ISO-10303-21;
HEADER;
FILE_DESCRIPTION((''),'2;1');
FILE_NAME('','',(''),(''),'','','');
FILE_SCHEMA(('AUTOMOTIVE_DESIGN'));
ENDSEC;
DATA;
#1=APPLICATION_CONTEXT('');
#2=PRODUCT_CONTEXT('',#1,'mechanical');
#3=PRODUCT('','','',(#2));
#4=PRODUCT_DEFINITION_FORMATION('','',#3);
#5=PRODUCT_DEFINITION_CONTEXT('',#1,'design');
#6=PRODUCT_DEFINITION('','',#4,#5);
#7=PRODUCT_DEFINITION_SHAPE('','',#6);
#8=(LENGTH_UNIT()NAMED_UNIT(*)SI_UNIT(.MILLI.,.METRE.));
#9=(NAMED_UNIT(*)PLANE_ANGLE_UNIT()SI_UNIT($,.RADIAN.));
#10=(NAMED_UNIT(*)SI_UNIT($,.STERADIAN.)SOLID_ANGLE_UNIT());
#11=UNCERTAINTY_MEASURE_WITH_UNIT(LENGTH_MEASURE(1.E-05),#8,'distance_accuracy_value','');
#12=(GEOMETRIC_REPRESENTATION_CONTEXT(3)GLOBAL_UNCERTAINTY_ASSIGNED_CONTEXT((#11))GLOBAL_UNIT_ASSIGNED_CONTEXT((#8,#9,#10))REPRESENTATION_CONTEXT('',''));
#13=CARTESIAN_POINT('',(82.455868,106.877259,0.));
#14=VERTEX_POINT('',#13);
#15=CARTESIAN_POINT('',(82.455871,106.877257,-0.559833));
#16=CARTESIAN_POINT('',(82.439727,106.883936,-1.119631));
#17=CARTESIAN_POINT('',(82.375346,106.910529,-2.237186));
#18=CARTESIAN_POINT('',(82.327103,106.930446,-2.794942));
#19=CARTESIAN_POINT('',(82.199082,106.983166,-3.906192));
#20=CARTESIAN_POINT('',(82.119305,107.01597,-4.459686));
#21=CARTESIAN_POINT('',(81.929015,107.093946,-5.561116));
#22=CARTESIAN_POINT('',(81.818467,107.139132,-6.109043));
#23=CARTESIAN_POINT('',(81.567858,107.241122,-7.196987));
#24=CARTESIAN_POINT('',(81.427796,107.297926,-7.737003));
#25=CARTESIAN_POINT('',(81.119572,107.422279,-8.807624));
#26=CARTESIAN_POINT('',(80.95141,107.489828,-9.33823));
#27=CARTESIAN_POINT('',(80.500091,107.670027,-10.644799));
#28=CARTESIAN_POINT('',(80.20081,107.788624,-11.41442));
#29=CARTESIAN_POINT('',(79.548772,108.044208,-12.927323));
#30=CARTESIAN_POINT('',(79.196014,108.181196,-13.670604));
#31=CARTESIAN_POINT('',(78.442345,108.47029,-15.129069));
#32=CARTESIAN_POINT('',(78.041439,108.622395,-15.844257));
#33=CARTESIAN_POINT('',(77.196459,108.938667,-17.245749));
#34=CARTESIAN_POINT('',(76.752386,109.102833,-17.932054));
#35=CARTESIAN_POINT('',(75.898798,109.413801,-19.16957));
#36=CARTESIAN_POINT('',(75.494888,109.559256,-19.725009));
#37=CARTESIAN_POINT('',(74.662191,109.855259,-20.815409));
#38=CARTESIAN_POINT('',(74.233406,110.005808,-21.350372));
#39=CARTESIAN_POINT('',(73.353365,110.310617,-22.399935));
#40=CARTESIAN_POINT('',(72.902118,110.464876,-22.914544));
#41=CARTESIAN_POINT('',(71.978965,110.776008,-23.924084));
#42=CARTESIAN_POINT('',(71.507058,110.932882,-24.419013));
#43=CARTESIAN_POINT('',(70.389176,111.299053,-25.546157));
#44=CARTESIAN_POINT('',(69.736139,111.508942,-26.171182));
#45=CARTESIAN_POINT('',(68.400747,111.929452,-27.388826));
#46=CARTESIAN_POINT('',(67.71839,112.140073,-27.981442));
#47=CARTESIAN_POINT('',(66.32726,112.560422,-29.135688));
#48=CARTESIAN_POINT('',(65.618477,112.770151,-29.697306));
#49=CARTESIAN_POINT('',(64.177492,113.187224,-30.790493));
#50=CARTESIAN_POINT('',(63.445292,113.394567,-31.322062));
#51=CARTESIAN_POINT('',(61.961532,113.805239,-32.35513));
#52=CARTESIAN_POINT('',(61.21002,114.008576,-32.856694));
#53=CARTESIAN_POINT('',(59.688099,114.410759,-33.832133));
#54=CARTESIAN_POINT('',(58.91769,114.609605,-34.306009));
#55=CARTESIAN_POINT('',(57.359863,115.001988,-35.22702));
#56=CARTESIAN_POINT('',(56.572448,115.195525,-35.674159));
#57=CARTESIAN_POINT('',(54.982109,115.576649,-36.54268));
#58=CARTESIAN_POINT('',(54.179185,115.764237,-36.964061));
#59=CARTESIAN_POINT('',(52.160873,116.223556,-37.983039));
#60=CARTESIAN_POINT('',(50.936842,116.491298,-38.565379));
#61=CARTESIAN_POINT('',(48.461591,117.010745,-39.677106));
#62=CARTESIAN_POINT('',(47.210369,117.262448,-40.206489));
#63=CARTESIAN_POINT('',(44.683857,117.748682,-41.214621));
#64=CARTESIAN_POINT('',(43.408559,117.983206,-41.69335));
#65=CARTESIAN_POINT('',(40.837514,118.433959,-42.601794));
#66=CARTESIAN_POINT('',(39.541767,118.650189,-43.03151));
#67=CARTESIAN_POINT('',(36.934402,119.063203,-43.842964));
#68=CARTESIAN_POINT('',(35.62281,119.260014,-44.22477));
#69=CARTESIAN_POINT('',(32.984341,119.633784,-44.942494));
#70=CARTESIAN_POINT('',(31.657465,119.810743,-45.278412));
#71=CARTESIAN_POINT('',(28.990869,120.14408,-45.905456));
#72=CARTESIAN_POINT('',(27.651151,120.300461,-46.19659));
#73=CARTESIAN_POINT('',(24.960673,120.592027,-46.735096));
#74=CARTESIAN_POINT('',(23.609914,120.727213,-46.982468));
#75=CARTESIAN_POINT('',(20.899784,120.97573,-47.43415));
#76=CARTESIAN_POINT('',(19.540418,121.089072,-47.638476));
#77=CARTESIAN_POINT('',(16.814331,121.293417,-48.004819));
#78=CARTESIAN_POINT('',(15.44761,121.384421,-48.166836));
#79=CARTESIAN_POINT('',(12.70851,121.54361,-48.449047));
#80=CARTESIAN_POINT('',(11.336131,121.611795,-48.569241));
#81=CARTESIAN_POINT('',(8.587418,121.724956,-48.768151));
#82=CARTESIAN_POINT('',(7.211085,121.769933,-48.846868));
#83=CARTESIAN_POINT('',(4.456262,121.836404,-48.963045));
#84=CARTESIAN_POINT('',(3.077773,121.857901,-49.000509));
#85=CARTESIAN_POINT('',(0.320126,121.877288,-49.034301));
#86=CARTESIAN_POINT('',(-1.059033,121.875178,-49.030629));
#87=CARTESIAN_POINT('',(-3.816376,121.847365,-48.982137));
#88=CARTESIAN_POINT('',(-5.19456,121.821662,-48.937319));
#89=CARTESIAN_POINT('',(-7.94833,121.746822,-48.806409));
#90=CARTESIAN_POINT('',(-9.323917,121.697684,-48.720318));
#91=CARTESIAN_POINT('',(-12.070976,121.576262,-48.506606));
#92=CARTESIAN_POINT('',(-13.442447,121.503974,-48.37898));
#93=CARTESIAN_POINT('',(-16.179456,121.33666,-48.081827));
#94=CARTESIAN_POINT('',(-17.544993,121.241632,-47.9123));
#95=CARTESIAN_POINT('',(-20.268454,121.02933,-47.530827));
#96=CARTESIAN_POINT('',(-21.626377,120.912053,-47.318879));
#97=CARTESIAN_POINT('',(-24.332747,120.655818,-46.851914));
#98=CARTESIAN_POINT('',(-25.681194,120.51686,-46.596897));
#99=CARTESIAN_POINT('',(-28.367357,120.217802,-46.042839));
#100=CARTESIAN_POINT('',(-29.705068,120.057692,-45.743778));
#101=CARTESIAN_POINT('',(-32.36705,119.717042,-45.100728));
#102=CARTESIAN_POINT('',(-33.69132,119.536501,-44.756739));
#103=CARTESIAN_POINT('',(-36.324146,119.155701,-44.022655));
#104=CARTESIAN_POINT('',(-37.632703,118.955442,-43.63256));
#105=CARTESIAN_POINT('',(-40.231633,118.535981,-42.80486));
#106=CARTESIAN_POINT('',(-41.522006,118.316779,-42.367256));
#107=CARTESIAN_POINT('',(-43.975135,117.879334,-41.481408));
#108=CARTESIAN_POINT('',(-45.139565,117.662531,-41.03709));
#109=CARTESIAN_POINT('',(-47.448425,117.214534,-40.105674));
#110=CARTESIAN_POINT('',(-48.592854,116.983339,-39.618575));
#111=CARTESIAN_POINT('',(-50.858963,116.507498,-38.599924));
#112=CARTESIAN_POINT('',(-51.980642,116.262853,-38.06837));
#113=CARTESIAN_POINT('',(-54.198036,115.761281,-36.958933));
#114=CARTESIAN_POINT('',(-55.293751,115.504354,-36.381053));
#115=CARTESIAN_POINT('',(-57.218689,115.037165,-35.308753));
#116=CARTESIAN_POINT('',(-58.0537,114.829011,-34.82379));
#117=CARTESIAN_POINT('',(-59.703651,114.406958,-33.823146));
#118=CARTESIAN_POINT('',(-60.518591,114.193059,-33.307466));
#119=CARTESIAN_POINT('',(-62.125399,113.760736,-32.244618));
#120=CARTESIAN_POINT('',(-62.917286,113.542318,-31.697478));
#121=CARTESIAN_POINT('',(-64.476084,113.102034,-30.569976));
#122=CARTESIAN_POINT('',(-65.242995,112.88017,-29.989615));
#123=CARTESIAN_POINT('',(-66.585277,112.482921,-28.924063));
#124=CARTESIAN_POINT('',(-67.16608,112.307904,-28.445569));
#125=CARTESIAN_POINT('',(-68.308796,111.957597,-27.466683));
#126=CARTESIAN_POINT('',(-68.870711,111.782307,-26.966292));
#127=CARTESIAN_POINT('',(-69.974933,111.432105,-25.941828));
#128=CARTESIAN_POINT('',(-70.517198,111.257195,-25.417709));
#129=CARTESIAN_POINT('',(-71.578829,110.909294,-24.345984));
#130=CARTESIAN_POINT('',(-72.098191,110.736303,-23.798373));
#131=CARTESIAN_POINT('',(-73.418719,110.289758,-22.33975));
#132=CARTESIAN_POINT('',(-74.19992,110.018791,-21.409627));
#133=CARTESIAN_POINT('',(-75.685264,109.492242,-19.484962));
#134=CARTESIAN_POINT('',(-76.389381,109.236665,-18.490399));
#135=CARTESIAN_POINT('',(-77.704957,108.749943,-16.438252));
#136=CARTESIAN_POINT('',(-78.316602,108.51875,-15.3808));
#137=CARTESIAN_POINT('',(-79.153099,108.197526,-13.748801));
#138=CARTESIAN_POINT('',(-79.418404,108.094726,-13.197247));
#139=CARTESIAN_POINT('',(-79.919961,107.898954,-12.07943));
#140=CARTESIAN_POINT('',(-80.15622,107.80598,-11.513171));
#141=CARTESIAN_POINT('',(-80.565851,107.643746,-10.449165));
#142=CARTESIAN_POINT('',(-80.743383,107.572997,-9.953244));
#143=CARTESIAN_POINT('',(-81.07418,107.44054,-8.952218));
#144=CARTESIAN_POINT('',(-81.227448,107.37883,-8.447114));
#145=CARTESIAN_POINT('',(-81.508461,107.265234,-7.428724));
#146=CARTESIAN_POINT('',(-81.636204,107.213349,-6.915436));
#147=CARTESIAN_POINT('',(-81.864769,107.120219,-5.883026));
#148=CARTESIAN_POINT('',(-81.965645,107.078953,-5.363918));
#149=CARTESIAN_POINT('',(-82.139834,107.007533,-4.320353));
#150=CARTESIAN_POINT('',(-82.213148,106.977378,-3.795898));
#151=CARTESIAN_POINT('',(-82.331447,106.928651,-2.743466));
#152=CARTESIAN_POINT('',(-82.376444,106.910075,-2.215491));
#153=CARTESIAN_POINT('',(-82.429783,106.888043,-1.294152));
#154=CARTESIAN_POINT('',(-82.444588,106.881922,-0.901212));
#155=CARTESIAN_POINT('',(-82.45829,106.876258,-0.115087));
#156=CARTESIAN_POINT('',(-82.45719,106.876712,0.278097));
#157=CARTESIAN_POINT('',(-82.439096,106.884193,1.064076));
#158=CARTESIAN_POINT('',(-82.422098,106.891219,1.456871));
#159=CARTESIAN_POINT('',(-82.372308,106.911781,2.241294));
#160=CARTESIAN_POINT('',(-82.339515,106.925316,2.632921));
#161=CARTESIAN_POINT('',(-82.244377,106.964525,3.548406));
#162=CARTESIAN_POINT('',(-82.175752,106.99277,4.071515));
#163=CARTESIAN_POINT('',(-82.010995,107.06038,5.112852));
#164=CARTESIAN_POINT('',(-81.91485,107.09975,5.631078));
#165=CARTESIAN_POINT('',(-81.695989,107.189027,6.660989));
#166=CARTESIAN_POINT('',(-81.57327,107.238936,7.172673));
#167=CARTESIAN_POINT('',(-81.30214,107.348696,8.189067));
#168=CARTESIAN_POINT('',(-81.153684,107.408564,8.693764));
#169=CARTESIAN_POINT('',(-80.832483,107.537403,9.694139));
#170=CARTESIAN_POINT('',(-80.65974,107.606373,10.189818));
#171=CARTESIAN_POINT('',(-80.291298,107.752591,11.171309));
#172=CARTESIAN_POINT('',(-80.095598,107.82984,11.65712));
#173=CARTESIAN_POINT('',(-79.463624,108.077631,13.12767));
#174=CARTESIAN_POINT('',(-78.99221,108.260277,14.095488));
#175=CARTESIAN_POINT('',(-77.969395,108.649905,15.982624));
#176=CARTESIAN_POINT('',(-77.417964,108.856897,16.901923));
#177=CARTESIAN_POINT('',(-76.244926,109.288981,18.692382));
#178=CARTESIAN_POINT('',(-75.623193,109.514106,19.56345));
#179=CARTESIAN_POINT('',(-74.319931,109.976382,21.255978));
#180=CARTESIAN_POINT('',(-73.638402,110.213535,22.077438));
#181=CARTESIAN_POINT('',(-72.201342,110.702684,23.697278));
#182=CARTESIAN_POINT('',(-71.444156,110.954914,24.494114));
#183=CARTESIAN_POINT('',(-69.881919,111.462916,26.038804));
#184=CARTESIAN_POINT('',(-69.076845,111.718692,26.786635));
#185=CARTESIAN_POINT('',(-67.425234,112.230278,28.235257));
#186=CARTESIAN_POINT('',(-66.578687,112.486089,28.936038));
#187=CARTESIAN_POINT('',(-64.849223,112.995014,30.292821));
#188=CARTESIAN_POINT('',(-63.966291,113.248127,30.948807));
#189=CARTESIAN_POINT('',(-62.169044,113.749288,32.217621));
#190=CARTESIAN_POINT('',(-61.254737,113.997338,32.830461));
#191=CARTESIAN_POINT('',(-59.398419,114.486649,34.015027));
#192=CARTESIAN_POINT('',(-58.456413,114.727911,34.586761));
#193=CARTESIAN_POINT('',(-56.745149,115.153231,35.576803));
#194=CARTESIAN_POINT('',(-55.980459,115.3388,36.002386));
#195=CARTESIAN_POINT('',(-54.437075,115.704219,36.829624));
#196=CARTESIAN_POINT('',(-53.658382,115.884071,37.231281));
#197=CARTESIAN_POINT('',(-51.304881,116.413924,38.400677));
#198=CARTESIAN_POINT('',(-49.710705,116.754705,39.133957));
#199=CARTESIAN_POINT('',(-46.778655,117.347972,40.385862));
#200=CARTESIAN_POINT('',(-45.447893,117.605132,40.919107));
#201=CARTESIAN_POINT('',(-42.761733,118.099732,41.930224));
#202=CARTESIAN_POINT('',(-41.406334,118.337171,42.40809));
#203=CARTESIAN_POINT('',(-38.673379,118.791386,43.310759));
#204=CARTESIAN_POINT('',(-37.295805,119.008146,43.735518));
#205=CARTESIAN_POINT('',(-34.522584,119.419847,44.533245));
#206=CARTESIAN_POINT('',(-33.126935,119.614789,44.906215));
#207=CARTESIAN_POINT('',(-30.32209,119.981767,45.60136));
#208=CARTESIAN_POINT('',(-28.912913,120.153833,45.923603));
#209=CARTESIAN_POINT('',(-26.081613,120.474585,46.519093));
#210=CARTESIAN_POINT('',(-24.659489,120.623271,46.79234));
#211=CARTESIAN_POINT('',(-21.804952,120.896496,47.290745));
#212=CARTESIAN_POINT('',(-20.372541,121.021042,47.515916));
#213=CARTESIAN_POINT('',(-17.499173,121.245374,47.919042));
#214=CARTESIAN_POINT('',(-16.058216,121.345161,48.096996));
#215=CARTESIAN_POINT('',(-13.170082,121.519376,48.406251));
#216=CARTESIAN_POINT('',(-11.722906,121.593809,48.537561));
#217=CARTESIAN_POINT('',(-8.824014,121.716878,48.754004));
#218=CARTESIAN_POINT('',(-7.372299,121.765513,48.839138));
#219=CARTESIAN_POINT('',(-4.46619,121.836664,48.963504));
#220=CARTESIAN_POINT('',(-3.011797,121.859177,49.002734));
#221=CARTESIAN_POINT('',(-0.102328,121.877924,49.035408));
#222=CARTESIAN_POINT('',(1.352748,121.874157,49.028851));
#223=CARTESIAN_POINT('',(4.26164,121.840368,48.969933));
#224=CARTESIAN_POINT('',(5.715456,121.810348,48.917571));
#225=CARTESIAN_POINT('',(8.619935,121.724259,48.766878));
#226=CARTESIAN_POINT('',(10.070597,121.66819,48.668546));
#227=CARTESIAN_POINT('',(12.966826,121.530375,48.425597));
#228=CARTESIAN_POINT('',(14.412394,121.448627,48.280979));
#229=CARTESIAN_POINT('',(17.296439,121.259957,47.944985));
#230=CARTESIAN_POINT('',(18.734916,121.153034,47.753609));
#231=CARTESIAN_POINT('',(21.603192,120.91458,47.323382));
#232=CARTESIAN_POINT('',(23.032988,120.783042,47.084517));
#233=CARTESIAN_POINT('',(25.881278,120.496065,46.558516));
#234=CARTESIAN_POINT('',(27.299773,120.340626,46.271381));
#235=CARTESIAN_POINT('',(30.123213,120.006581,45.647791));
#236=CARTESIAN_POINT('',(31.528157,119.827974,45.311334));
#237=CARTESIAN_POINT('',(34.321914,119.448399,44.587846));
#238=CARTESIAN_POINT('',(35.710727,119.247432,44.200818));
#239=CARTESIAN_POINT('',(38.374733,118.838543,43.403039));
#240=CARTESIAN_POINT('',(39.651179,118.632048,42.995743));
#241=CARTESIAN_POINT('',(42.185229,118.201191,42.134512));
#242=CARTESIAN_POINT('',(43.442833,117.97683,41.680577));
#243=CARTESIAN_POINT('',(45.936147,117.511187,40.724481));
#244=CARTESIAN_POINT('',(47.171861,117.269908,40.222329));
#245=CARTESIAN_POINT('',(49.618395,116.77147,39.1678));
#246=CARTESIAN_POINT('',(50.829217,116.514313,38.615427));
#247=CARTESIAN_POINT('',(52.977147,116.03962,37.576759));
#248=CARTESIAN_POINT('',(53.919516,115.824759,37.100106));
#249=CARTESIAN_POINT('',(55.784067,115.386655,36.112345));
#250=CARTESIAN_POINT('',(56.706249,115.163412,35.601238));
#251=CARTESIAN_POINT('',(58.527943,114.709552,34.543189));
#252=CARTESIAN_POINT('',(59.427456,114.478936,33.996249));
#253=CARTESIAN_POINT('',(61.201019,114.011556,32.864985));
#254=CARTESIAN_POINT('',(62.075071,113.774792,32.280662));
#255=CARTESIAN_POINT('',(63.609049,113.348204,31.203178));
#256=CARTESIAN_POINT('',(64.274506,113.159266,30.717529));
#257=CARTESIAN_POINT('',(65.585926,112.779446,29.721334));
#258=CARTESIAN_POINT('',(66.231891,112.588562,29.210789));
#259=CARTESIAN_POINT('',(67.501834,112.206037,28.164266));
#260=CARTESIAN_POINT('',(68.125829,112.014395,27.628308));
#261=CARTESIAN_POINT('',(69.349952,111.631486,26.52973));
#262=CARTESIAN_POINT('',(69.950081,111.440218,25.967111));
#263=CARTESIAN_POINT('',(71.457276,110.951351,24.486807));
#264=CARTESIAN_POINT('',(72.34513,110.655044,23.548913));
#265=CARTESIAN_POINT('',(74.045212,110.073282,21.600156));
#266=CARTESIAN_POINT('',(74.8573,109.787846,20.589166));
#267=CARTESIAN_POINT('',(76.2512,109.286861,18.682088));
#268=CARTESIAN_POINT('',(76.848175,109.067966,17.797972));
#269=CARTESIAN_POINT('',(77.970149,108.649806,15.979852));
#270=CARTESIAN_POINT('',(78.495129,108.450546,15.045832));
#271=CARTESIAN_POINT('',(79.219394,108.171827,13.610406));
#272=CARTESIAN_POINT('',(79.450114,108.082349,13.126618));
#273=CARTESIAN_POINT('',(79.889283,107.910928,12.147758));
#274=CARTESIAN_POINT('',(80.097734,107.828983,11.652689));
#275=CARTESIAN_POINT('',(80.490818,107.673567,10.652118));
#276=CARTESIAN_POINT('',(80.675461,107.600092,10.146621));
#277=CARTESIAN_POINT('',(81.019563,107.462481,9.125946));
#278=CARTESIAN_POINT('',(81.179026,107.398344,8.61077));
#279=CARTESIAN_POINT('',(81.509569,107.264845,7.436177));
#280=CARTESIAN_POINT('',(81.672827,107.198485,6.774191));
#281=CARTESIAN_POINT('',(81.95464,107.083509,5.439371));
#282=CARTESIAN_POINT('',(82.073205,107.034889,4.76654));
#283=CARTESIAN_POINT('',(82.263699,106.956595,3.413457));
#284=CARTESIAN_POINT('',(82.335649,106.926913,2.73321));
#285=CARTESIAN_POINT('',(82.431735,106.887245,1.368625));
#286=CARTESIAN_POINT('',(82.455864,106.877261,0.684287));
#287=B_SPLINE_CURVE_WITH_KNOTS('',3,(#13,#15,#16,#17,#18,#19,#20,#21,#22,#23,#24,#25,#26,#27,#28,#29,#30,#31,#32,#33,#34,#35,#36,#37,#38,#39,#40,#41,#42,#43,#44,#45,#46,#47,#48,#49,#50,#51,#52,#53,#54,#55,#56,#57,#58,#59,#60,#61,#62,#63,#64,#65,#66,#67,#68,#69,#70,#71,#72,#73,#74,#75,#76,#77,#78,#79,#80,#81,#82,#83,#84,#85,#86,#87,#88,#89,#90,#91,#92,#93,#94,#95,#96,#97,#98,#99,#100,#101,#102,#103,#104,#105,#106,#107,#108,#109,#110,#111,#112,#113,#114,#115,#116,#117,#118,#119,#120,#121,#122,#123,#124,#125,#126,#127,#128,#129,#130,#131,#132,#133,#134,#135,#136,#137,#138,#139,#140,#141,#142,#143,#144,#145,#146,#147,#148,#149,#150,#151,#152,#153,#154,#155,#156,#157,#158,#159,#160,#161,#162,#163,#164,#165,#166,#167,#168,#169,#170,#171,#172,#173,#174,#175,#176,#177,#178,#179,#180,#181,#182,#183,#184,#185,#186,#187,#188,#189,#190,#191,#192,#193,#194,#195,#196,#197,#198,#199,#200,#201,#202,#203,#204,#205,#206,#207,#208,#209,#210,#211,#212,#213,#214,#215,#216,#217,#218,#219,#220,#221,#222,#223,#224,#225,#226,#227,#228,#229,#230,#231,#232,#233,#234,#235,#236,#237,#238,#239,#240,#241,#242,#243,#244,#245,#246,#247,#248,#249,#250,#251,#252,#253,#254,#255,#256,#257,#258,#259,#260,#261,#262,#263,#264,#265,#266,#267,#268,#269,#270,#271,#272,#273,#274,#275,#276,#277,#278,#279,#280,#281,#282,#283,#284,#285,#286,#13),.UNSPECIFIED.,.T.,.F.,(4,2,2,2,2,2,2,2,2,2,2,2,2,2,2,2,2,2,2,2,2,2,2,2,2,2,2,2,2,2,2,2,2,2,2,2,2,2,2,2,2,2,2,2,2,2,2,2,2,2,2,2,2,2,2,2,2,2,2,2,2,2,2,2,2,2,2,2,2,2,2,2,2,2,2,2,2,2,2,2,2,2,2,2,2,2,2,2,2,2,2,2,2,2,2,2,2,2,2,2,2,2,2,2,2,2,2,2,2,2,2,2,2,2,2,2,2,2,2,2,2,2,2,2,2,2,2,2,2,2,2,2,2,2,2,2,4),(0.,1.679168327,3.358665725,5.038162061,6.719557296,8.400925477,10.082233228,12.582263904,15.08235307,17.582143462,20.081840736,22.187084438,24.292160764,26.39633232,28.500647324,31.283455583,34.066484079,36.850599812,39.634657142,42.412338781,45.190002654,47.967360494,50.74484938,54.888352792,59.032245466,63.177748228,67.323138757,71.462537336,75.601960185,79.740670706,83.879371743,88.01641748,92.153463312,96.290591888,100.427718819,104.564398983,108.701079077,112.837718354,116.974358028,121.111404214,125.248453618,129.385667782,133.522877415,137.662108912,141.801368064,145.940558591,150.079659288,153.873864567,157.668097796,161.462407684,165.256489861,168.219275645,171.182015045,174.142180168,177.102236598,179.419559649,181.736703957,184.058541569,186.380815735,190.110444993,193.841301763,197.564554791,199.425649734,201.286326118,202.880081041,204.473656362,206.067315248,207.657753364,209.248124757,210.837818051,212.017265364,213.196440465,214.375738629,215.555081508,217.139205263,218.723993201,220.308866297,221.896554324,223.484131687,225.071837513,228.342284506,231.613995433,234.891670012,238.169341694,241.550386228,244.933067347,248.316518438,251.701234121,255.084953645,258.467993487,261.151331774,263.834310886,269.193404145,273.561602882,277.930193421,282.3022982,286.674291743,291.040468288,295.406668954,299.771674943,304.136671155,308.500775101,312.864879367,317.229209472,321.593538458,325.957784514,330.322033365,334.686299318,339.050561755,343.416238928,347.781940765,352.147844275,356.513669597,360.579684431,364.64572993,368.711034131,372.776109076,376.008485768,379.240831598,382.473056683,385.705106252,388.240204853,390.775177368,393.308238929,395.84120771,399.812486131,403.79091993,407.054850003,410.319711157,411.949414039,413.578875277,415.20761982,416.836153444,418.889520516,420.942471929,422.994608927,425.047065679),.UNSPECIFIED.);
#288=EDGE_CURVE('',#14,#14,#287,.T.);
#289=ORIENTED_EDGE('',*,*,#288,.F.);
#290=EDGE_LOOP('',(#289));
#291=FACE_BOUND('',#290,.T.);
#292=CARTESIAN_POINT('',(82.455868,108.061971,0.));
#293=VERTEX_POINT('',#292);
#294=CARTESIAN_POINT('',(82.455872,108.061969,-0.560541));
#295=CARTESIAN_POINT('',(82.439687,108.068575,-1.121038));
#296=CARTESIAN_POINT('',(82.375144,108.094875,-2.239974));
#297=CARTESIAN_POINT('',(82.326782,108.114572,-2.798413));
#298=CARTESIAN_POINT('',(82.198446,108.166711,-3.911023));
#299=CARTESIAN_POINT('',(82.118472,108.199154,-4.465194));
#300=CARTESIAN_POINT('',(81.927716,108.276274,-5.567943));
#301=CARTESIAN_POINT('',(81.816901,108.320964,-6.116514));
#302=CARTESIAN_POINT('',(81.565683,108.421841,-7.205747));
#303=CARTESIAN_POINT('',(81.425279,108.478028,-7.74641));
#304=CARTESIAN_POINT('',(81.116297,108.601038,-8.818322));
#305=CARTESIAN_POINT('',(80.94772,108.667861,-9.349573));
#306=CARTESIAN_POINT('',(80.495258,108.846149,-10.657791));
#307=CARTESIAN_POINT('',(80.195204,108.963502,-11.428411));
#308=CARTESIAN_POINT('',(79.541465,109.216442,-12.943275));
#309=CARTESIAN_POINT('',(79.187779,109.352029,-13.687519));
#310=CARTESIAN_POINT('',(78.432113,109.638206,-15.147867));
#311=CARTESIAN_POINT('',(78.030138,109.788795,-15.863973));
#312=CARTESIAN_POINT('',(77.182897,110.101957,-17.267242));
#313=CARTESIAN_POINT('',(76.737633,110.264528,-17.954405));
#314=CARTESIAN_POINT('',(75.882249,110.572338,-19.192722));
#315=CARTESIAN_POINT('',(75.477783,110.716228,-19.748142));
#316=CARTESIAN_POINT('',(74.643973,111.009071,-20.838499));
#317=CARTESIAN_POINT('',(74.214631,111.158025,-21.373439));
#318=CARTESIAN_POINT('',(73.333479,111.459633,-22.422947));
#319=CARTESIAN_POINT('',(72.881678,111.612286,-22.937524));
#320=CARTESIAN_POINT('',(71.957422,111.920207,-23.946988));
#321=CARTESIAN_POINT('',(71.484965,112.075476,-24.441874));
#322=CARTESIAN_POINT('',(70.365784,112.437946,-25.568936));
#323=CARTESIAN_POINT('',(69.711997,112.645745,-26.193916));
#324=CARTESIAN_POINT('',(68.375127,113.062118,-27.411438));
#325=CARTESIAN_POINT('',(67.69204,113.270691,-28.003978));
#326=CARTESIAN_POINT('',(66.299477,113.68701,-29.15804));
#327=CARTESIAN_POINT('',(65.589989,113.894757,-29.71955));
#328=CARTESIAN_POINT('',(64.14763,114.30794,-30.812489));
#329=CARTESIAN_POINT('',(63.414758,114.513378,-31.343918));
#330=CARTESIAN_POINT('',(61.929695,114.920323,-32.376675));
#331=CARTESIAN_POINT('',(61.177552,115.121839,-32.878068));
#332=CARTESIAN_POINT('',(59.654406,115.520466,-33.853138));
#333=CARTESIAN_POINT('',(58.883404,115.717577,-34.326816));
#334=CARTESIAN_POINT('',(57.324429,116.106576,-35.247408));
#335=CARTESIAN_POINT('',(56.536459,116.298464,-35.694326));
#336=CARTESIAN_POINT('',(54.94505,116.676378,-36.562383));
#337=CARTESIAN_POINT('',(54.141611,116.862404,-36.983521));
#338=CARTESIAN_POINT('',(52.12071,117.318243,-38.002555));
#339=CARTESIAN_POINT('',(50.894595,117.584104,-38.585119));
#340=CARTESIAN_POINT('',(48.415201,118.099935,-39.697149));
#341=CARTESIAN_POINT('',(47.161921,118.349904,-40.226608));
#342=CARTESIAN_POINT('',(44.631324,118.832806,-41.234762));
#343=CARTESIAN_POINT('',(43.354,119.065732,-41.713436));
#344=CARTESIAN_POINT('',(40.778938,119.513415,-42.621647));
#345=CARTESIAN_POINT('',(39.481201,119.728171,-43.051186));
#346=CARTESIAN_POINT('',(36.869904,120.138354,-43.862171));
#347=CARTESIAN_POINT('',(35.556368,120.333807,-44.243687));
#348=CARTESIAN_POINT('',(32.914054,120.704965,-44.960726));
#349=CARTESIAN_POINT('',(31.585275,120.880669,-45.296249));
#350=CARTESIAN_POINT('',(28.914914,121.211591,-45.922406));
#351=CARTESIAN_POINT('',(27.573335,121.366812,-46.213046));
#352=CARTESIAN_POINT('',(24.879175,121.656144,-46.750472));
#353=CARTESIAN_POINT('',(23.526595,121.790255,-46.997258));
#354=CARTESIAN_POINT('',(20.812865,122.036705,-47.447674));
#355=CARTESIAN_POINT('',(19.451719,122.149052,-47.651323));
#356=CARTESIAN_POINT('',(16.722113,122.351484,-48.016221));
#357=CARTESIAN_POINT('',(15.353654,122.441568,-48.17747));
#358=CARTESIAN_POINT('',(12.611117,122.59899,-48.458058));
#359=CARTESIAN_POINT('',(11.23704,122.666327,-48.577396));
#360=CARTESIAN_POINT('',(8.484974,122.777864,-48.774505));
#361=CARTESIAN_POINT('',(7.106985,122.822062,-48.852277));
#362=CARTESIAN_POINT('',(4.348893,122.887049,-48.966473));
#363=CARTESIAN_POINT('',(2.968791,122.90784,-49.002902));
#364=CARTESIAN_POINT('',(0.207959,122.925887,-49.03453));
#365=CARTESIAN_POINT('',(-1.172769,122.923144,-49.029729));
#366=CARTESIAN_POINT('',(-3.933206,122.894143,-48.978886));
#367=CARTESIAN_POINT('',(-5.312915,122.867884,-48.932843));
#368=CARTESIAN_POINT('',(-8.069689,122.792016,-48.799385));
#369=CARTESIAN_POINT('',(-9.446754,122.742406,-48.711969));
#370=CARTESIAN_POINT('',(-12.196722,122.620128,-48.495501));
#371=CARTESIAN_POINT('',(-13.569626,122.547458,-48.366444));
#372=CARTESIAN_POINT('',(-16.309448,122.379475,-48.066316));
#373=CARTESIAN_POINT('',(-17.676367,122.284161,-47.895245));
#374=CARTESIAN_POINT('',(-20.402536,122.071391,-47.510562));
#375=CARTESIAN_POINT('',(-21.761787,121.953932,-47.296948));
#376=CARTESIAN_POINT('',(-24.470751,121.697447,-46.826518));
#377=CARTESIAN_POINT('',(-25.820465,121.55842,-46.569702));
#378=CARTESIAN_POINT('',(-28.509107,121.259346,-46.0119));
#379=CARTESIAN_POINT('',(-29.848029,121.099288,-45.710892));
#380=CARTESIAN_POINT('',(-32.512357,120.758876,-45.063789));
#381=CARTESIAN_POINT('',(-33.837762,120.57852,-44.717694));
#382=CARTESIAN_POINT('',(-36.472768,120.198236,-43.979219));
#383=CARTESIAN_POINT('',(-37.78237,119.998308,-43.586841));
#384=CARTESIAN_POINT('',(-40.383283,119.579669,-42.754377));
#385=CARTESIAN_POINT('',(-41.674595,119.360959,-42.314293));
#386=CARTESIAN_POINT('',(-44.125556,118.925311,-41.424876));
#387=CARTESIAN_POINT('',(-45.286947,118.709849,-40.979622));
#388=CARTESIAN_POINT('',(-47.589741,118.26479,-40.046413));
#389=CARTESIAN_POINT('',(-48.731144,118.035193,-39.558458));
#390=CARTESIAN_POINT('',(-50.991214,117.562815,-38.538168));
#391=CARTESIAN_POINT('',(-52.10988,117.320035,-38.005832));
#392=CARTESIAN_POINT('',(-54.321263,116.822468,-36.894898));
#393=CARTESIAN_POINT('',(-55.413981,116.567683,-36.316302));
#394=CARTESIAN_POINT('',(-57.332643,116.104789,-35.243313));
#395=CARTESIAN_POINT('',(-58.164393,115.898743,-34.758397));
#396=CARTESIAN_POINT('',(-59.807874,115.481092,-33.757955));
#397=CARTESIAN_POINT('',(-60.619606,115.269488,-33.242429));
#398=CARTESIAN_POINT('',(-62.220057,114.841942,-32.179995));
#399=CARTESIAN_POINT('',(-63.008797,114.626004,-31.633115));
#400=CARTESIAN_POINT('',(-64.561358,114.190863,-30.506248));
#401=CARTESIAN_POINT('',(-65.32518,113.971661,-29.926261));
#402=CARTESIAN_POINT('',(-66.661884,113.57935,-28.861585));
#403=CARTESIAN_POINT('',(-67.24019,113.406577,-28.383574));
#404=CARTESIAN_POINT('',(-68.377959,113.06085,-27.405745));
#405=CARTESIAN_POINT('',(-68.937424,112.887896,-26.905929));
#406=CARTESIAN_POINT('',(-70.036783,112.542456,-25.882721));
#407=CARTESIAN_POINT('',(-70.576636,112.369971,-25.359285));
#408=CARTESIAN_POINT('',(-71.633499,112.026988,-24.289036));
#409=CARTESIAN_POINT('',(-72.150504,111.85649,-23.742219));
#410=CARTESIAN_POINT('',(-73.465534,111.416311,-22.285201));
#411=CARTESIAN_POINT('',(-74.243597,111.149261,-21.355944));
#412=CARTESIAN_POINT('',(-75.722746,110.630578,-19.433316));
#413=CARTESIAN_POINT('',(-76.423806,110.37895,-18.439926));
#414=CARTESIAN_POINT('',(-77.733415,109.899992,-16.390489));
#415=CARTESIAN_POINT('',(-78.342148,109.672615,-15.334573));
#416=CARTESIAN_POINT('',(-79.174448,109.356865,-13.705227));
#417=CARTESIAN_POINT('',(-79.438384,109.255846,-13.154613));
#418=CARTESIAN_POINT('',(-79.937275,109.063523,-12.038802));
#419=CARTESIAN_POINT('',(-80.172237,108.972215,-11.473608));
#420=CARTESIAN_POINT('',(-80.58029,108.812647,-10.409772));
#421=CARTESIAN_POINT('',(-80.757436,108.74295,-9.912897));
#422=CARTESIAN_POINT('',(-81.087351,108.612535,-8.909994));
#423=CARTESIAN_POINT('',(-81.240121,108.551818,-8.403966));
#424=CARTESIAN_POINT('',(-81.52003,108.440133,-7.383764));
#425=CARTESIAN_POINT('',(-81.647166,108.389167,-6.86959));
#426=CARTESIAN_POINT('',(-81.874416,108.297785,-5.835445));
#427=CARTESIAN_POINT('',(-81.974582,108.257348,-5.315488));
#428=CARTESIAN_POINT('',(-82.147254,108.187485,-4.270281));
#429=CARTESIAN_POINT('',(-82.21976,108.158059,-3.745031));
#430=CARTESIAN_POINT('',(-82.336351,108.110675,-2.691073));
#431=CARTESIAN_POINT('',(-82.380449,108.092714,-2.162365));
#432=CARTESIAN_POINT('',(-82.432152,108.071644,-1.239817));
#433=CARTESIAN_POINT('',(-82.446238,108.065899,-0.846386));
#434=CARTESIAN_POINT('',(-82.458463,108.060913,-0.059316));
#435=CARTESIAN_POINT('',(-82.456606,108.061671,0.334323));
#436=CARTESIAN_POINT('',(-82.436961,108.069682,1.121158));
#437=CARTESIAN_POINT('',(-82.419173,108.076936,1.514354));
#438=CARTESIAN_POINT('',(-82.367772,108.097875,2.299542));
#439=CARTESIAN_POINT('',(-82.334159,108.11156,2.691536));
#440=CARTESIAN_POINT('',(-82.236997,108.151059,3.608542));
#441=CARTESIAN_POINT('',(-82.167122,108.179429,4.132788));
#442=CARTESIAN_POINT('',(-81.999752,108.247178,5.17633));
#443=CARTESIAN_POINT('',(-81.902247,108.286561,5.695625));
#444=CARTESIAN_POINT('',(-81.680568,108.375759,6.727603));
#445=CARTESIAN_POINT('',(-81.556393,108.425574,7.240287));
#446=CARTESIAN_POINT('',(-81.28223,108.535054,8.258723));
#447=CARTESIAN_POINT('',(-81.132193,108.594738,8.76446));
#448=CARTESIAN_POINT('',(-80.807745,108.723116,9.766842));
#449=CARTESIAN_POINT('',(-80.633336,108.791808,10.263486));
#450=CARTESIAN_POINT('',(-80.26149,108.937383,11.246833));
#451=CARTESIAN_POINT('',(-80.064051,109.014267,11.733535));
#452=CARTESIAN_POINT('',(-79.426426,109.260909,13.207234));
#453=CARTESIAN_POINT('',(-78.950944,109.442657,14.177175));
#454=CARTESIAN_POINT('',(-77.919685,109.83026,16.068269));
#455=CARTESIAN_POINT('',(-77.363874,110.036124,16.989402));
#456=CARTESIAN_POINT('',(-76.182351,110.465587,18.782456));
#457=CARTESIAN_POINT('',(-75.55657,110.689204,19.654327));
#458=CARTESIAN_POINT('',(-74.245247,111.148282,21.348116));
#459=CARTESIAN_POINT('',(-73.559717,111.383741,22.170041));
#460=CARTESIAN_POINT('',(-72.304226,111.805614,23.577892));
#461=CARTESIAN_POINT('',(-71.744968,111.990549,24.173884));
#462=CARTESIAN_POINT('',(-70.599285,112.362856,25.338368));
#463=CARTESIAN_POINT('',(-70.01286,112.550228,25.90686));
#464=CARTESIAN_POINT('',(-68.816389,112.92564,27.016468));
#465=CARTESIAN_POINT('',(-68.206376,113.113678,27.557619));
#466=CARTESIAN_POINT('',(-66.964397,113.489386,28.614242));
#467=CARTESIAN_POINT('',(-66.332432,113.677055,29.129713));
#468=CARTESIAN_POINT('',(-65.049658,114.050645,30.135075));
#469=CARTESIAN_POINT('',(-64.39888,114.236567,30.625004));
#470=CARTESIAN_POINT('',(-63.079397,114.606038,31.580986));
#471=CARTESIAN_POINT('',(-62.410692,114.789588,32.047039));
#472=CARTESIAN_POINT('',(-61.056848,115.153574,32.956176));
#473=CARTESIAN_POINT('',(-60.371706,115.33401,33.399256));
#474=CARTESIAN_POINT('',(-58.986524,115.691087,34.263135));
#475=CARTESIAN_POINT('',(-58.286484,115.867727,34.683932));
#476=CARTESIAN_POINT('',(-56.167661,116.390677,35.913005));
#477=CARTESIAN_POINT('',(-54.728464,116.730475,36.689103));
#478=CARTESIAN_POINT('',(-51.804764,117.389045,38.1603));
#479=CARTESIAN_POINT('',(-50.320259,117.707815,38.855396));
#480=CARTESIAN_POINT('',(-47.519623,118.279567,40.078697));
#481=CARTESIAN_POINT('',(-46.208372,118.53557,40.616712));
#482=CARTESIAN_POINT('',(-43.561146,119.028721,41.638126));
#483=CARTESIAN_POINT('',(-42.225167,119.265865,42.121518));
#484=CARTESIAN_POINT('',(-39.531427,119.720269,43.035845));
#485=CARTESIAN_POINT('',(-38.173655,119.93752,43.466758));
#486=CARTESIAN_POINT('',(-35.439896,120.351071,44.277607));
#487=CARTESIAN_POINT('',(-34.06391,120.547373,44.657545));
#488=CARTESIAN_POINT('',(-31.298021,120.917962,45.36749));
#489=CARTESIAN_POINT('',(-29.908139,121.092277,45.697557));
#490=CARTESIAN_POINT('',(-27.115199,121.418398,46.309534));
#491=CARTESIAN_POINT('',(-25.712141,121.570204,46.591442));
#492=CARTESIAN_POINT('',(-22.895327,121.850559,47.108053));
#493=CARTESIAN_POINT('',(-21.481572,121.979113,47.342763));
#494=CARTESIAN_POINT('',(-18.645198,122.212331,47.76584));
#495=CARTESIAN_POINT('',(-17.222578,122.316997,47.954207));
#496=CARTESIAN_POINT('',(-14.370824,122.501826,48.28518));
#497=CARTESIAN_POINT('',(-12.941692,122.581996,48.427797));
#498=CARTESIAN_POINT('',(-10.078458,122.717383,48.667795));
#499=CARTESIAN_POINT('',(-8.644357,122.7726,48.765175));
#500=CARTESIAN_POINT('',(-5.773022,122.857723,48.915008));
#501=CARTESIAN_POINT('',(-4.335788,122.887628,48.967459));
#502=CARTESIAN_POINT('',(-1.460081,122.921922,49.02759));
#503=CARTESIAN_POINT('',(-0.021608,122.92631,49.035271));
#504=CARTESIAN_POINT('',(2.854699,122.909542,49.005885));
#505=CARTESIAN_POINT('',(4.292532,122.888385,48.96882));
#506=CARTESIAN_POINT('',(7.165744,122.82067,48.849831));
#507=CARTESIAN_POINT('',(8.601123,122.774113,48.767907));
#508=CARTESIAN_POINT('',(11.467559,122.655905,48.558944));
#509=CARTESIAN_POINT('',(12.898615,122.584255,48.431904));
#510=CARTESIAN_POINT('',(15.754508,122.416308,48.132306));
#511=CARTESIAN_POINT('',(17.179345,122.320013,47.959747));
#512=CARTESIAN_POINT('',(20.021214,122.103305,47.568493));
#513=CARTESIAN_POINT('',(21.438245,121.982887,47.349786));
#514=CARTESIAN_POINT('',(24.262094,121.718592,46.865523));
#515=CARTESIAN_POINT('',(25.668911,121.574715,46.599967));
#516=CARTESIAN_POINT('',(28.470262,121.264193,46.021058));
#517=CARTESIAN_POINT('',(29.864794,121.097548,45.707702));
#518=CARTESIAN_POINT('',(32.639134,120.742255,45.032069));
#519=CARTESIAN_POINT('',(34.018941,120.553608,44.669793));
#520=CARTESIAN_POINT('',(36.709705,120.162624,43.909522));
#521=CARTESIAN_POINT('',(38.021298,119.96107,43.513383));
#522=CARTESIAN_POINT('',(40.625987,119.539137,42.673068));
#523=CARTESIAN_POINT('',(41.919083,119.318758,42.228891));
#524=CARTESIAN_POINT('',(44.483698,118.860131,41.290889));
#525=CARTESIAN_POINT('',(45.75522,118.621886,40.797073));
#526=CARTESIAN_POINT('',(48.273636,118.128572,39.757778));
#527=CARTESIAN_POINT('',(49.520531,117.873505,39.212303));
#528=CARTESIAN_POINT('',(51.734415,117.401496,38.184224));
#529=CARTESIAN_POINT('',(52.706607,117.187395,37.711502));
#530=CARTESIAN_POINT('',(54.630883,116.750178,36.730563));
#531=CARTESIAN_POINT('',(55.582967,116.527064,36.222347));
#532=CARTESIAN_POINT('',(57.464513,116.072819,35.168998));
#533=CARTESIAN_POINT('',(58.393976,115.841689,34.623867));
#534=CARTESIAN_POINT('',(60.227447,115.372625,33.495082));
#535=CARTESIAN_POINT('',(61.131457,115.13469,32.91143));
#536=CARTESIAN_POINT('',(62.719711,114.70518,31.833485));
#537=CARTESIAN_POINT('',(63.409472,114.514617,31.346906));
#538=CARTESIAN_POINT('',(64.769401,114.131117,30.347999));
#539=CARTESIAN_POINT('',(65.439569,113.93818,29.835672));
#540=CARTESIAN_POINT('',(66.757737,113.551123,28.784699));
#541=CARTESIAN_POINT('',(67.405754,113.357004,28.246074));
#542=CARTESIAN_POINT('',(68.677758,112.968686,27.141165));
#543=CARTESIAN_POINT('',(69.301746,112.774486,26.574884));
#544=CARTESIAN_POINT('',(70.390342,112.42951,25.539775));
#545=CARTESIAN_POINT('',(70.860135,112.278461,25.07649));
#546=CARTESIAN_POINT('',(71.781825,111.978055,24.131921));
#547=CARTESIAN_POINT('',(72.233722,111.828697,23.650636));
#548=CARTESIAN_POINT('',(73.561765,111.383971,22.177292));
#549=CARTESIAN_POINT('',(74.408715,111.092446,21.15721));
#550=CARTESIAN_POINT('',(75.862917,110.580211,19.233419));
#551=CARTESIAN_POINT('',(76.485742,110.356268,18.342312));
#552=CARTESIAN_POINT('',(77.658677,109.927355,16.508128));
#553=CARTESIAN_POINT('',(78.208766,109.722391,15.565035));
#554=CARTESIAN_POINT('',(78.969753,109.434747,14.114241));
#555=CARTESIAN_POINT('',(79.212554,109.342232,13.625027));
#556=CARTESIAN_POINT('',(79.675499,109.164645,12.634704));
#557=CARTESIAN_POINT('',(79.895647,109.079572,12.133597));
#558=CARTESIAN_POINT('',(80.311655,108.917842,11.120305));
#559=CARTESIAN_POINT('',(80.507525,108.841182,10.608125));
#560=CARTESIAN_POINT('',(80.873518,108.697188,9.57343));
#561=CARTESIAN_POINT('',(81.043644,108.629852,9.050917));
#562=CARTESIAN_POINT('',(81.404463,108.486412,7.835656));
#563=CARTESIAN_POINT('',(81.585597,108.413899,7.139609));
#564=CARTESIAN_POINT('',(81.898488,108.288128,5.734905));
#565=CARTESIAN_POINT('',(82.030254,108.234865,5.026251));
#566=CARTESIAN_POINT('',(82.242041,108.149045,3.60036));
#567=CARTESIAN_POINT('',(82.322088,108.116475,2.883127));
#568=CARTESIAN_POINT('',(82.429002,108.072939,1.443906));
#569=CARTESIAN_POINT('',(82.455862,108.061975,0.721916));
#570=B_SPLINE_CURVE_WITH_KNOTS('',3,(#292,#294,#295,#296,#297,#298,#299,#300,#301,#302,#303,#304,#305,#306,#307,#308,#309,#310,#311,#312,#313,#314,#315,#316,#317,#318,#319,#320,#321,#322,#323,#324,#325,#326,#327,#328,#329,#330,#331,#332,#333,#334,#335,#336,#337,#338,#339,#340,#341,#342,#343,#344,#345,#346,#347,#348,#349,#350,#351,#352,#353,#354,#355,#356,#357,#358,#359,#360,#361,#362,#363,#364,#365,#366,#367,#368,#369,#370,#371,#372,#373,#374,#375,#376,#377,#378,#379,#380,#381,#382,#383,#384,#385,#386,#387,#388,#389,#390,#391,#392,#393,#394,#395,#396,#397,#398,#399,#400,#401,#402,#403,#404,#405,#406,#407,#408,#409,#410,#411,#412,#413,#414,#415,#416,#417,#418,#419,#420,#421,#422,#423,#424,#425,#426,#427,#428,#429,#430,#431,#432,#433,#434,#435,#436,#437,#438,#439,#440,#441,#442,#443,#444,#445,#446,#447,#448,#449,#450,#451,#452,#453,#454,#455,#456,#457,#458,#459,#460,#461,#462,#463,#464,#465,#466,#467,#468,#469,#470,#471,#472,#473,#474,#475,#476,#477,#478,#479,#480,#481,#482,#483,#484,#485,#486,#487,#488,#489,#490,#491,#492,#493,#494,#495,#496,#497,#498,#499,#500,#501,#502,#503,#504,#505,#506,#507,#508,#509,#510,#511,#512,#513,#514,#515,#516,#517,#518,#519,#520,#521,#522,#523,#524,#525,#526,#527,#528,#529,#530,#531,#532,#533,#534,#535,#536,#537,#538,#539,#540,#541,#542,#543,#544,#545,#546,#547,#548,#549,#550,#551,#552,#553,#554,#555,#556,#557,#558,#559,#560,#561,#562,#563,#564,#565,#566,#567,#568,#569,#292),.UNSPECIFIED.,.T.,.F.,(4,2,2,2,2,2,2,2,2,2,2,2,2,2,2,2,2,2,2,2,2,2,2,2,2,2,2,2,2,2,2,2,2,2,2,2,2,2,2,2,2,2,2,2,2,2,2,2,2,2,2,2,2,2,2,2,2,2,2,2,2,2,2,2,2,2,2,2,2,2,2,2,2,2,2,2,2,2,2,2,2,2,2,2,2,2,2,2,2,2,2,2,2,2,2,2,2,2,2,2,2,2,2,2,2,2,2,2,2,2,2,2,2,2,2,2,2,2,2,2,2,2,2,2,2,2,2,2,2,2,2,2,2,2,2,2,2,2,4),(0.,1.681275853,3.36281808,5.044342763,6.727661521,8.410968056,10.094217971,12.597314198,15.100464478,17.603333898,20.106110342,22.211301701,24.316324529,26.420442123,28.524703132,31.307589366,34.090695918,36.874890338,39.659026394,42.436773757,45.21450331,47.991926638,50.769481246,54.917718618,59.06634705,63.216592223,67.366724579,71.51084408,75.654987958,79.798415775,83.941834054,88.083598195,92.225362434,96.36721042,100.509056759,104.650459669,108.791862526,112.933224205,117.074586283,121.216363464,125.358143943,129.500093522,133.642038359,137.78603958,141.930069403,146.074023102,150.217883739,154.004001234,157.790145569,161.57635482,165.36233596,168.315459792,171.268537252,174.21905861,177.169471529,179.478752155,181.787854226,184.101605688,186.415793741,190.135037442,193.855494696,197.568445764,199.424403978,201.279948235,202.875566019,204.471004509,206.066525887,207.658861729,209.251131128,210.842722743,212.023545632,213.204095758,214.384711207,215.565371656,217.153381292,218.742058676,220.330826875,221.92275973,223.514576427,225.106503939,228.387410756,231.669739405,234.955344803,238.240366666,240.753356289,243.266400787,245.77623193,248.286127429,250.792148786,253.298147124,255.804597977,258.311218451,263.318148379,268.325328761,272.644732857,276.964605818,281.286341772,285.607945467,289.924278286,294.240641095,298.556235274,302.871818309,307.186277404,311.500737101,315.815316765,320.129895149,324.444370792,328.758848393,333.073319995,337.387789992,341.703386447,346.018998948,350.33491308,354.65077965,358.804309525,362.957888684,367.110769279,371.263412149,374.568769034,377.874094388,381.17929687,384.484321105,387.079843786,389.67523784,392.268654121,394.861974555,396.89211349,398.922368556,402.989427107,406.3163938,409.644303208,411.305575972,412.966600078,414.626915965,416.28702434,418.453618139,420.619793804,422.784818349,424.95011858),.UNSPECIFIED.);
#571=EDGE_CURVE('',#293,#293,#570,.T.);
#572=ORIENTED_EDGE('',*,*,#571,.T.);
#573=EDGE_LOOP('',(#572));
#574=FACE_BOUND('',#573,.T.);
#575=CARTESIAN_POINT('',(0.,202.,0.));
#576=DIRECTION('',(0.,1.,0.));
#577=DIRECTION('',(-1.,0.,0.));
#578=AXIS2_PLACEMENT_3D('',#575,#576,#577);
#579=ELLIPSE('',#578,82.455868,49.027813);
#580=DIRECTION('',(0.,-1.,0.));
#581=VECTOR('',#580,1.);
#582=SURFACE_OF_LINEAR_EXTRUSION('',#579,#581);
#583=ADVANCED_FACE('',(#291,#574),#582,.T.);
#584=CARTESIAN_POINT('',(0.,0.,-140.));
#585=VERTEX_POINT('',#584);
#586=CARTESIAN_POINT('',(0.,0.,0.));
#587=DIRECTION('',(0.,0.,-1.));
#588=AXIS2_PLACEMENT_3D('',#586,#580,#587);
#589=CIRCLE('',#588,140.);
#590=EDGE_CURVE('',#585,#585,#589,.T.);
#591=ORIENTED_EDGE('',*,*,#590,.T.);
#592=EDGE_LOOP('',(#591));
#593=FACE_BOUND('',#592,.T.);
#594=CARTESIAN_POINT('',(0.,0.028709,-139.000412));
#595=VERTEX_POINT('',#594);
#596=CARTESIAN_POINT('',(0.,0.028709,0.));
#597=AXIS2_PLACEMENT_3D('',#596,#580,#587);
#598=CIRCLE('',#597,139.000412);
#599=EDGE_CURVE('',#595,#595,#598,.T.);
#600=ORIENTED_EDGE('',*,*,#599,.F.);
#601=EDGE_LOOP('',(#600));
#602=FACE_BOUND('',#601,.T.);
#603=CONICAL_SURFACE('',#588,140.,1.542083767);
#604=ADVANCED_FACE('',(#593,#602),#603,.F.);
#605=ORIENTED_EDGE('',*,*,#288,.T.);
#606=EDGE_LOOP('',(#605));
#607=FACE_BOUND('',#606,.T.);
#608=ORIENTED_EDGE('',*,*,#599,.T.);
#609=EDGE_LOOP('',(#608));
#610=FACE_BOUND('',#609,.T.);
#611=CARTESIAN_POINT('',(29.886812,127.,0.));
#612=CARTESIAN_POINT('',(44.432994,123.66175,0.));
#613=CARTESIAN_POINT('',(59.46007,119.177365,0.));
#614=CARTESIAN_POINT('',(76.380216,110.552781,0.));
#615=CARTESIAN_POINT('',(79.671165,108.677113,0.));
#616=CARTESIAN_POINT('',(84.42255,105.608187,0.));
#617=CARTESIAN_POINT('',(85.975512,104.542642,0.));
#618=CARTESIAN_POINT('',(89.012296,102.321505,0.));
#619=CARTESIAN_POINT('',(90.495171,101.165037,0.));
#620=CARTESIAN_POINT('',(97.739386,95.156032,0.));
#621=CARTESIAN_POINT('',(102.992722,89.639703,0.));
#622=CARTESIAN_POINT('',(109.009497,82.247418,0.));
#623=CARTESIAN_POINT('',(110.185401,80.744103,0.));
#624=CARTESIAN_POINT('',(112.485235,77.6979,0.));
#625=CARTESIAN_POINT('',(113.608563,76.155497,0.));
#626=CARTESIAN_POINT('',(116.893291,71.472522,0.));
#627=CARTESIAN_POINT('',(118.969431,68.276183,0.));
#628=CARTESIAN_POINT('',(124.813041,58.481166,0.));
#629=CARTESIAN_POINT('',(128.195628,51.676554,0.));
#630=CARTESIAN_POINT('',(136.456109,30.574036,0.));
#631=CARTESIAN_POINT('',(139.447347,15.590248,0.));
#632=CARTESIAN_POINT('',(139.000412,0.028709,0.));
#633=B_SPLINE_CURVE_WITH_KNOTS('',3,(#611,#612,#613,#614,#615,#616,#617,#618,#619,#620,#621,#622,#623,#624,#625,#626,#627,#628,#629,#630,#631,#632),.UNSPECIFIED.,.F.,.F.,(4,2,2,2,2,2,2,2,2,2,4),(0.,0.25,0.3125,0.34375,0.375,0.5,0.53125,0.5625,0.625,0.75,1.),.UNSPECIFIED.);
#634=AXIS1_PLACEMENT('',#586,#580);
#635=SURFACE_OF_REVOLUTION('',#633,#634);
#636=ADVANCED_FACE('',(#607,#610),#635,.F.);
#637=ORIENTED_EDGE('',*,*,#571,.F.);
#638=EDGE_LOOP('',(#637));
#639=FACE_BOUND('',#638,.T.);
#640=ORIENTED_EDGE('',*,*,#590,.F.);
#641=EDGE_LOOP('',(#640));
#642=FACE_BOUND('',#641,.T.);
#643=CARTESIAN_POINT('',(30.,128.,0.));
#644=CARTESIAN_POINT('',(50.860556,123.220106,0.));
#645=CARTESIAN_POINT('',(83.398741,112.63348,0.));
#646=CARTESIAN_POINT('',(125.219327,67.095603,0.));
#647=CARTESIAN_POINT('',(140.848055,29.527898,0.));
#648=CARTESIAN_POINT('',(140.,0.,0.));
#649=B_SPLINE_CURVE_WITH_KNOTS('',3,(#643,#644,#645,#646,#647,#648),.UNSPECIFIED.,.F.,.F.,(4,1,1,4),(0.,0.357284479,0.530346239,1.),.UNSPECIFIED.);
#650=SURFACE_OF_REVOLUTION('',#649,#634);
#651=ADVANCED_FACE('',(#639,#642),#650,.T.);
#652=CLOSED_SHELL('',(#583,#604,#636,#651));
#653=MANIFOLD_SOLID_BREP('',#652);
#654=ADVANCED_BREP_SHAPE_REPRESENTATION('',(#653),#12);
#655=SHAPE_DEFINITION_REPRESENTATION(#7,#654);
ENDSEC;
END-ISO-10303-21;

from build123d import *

# Parameters (mm, degrees)
ROTATION_D_NN1_OUTLINE_W        = 0.113188128
ROTATION_D_NN1_OUTLINE_H        = 1
ROTATION_D_NN1_OUTLINE_W_2      = 29.886811872
SKIZZE2_RX                      = 82.455867631
SKIZZE2_RY                      = 49.027813186
SCHNITT_LINEAR_AUSTRAGEN1_DEPTH = 202


# Read off the part's stored shape, not the designer's step: Rotation-Dünn1
with BuildPart() as part:
    # Rotation-Dünn1 outline → Rotation-Dünn1 (revolve)
    with BuildSketch(Plane.XY):
        with BuildLine():
            Line((30, 127), (29.886811872, 127))
            add(Edge.make_bspline(
                [(29.886811872, 127), (29.924538025, 126.991342103), (29.962267412, 126.982676498), (30, 126.97400316)],
                knots=[0, 0, 0, 0, 0.000648386, 0.000648386, 0.000648386, 0.000648386], degree=3))
            Line((30, 126.97400316), (30, 127))
        make_face()
        with Locations((29.943405936, 127.5)):
            Rectangle(ROTATION_D_NN1_OUTLINE_W, ROTATION_D_NN1_OUTLINE_H)
        with Locations((14.943405936, 127.5)):
            Rectangle(ROTATION_D_NN1_OUTLINE_W_2, ROTATION_D_NN1_OUTLINE_H)
        with BuildLine():
            Line((30, 127), (30, 126.97400316))
            add(Edge.make_bspline(
                [(30, 126.97400316), (44.510930435, 123.638472658), (59.495176103, 119.159470388), (76.380216283, 110.552780869), (79.671165399, 108.677112642), (84.422549965, 105.608187262), (85.975511888, 104.542641875), (89.012296056, 102.321504936), (90.49517076, 101.165037475), (97.739385685, 95.156031588), (102.99272173, 89.639702729), (109.009496988, 82.247417665), (110.185400974, 80.744102894), (112.48523463, 77.697900025), (113.608562564, 76.155497402), (116.893290722, 71.472522119), (118.969431326, 68.276183218), (124.813040843, 58.481166274), (128.195628137, 51.67655385), (135.731724357, 32.424575519), (138.61688744, 19.516320947), (139.000412177, 6.138810058)],
                knots=[0.000648386, 0.000648386, 0.000648386, 0.000648386, 0.25, 0.25, 0.3125, 0.3125, 0.34375, 0.34375, 0.375, 0.375, 0.5, 0.5, 0.53125, 0.53125, 0.5625, 0.5625, 0.625, 0.625, 0.75, 0.75, 0.967115187, 0.967115187, 0.967115187, 0.967115187], degree=3))
            Line((139.000412177, 6.138810058), (139.000412177, 18.082835303))
            add(Edge.make_bspline(
                [(34.231854255, 127), (53.794868782, 122.23046394), (84.406099271, 111.53658079), (121.145862461, 71.531144113), (135.852614284, 40.724022307), (139.000412177, 18.082835303)],
                knots=[0.024087618, 0.024087618, 0.024087618, 0.024087618, 0.357284479, 0.530346239, 0.902596657, 0.902596657, 0.902596657, 0.902596657], degree=3))
            Line((34.231854255, 127), (30, 127))
        make_face()
        with BuildLine():
            Line((30, 128), (30, 127))
            Line((30, 127), (34.231854255, 127))
            add(Edge.make_bspline(
                [(30, 128), (31.406389392, 127.677746239), (32.817595948, 127.344801461), (34.231854255, 127)],
                knots=[0, 0, 0, 0, 0.024087618, 0.024087618, 0.024087618, 0.024087618], degree=3))
        make_face()
        with BuildLine():
            Line((139.000412177, 18.082835303), (139.000412177, 6.138810058))
            add(Edge.make_bspline(
                [(139.000412177, 6.138810058), (139.0585018, 4.112618545), (139.059201601, 2.075661872), (139.000412177, 0.028708614)],
                knots=[0.967115187, 0.967115187, 0.967115187, 0.967115187, 1, 1, 1, 1], degree=3))
            Line((139.000412177, 0.028708614), (140, 0.028708614))
            Line((140, 0.028708614), (140, 6.165779952))
            add(Edge.make_bspline(
                [(139.000412177, 18.082835303), (139.546235838, 14.156885796), (139.884849944, 10.18249532), (140, 6.165779952)],
                knots=[0.902596657, 0.902596657, 0.902596657, 0.902596657, 0.967144348, 0.967144348, 0.967144348, 0.967144348], degree=3))
        make_face()
        Polygon((140, 0.028708614), (139.000412177, 0.028708614), (140, 0), align=None)
        with BuildLine():
            Line((140, 0.028708614), (140, 0))
            add(Edge.make_bspline(
                [(140.000820677, 0.028708614), (140.000548407, 0.019139294), (140.000274848, 0.009569756), (140, 0)],
                knots=[0.999847789, 0.999847789, 0.999847789, 0.999847789, 1, 1, 1, 1], degree=3))
            Line((140.000820677, 0.028708614), (140, 0.028708614))
        make_face()
        with BuildLine():
            Line((140, 6.165779952), (140, 0.028708614))
            Line((140, 0.028708614), (140.000820677, 0.028708614))
            add(Edge.make_bspline(
                [(140.044228074, 3.081473717), (140.044228082, 2.066428849), (140.029845016, 1.048808097), (140.000820677, 0.028708614)],
                knots=[0.983621934, 0.983621934, 0.983621934, 0.983621934, 0.999847789, 0.999847789, 0.999847789, 0.999847789], degree=3))
            add(Edge.make_bspline(
                [(140, 6.165779952), (140.02939524, 5.140402132), (140.044228066, 4.112266139), (140.044228074, 3.081473717)],
                knots=[0.967144348, 0.967144348, 0.967144348, 0.967144348, 0.983621934, 0.983621934, 0.983621934, 0.983621934], degree=3))
        make_face()
    revolve(axis=Axis((0, 0, 0), (0, 1, 0)))

    # Skizze2 → Schnitt-Linear austragen1 (cut)
    with BuildSketch(Plane(origin=(0, 0, 0), x_dir=(1, 0, 0), z_dir=(0, 1, 0))):
        with Locations(Location((0, 0), (0, 0, 180))):
            Ellipse(SKIZZE2_RX, SKIZZE2_RY)
    extrude(amount=SCHNITT_LINEAR_AUSTRAGEN1_DEPTH, mode=Mode.SUBTRACT)


solid = part.part
